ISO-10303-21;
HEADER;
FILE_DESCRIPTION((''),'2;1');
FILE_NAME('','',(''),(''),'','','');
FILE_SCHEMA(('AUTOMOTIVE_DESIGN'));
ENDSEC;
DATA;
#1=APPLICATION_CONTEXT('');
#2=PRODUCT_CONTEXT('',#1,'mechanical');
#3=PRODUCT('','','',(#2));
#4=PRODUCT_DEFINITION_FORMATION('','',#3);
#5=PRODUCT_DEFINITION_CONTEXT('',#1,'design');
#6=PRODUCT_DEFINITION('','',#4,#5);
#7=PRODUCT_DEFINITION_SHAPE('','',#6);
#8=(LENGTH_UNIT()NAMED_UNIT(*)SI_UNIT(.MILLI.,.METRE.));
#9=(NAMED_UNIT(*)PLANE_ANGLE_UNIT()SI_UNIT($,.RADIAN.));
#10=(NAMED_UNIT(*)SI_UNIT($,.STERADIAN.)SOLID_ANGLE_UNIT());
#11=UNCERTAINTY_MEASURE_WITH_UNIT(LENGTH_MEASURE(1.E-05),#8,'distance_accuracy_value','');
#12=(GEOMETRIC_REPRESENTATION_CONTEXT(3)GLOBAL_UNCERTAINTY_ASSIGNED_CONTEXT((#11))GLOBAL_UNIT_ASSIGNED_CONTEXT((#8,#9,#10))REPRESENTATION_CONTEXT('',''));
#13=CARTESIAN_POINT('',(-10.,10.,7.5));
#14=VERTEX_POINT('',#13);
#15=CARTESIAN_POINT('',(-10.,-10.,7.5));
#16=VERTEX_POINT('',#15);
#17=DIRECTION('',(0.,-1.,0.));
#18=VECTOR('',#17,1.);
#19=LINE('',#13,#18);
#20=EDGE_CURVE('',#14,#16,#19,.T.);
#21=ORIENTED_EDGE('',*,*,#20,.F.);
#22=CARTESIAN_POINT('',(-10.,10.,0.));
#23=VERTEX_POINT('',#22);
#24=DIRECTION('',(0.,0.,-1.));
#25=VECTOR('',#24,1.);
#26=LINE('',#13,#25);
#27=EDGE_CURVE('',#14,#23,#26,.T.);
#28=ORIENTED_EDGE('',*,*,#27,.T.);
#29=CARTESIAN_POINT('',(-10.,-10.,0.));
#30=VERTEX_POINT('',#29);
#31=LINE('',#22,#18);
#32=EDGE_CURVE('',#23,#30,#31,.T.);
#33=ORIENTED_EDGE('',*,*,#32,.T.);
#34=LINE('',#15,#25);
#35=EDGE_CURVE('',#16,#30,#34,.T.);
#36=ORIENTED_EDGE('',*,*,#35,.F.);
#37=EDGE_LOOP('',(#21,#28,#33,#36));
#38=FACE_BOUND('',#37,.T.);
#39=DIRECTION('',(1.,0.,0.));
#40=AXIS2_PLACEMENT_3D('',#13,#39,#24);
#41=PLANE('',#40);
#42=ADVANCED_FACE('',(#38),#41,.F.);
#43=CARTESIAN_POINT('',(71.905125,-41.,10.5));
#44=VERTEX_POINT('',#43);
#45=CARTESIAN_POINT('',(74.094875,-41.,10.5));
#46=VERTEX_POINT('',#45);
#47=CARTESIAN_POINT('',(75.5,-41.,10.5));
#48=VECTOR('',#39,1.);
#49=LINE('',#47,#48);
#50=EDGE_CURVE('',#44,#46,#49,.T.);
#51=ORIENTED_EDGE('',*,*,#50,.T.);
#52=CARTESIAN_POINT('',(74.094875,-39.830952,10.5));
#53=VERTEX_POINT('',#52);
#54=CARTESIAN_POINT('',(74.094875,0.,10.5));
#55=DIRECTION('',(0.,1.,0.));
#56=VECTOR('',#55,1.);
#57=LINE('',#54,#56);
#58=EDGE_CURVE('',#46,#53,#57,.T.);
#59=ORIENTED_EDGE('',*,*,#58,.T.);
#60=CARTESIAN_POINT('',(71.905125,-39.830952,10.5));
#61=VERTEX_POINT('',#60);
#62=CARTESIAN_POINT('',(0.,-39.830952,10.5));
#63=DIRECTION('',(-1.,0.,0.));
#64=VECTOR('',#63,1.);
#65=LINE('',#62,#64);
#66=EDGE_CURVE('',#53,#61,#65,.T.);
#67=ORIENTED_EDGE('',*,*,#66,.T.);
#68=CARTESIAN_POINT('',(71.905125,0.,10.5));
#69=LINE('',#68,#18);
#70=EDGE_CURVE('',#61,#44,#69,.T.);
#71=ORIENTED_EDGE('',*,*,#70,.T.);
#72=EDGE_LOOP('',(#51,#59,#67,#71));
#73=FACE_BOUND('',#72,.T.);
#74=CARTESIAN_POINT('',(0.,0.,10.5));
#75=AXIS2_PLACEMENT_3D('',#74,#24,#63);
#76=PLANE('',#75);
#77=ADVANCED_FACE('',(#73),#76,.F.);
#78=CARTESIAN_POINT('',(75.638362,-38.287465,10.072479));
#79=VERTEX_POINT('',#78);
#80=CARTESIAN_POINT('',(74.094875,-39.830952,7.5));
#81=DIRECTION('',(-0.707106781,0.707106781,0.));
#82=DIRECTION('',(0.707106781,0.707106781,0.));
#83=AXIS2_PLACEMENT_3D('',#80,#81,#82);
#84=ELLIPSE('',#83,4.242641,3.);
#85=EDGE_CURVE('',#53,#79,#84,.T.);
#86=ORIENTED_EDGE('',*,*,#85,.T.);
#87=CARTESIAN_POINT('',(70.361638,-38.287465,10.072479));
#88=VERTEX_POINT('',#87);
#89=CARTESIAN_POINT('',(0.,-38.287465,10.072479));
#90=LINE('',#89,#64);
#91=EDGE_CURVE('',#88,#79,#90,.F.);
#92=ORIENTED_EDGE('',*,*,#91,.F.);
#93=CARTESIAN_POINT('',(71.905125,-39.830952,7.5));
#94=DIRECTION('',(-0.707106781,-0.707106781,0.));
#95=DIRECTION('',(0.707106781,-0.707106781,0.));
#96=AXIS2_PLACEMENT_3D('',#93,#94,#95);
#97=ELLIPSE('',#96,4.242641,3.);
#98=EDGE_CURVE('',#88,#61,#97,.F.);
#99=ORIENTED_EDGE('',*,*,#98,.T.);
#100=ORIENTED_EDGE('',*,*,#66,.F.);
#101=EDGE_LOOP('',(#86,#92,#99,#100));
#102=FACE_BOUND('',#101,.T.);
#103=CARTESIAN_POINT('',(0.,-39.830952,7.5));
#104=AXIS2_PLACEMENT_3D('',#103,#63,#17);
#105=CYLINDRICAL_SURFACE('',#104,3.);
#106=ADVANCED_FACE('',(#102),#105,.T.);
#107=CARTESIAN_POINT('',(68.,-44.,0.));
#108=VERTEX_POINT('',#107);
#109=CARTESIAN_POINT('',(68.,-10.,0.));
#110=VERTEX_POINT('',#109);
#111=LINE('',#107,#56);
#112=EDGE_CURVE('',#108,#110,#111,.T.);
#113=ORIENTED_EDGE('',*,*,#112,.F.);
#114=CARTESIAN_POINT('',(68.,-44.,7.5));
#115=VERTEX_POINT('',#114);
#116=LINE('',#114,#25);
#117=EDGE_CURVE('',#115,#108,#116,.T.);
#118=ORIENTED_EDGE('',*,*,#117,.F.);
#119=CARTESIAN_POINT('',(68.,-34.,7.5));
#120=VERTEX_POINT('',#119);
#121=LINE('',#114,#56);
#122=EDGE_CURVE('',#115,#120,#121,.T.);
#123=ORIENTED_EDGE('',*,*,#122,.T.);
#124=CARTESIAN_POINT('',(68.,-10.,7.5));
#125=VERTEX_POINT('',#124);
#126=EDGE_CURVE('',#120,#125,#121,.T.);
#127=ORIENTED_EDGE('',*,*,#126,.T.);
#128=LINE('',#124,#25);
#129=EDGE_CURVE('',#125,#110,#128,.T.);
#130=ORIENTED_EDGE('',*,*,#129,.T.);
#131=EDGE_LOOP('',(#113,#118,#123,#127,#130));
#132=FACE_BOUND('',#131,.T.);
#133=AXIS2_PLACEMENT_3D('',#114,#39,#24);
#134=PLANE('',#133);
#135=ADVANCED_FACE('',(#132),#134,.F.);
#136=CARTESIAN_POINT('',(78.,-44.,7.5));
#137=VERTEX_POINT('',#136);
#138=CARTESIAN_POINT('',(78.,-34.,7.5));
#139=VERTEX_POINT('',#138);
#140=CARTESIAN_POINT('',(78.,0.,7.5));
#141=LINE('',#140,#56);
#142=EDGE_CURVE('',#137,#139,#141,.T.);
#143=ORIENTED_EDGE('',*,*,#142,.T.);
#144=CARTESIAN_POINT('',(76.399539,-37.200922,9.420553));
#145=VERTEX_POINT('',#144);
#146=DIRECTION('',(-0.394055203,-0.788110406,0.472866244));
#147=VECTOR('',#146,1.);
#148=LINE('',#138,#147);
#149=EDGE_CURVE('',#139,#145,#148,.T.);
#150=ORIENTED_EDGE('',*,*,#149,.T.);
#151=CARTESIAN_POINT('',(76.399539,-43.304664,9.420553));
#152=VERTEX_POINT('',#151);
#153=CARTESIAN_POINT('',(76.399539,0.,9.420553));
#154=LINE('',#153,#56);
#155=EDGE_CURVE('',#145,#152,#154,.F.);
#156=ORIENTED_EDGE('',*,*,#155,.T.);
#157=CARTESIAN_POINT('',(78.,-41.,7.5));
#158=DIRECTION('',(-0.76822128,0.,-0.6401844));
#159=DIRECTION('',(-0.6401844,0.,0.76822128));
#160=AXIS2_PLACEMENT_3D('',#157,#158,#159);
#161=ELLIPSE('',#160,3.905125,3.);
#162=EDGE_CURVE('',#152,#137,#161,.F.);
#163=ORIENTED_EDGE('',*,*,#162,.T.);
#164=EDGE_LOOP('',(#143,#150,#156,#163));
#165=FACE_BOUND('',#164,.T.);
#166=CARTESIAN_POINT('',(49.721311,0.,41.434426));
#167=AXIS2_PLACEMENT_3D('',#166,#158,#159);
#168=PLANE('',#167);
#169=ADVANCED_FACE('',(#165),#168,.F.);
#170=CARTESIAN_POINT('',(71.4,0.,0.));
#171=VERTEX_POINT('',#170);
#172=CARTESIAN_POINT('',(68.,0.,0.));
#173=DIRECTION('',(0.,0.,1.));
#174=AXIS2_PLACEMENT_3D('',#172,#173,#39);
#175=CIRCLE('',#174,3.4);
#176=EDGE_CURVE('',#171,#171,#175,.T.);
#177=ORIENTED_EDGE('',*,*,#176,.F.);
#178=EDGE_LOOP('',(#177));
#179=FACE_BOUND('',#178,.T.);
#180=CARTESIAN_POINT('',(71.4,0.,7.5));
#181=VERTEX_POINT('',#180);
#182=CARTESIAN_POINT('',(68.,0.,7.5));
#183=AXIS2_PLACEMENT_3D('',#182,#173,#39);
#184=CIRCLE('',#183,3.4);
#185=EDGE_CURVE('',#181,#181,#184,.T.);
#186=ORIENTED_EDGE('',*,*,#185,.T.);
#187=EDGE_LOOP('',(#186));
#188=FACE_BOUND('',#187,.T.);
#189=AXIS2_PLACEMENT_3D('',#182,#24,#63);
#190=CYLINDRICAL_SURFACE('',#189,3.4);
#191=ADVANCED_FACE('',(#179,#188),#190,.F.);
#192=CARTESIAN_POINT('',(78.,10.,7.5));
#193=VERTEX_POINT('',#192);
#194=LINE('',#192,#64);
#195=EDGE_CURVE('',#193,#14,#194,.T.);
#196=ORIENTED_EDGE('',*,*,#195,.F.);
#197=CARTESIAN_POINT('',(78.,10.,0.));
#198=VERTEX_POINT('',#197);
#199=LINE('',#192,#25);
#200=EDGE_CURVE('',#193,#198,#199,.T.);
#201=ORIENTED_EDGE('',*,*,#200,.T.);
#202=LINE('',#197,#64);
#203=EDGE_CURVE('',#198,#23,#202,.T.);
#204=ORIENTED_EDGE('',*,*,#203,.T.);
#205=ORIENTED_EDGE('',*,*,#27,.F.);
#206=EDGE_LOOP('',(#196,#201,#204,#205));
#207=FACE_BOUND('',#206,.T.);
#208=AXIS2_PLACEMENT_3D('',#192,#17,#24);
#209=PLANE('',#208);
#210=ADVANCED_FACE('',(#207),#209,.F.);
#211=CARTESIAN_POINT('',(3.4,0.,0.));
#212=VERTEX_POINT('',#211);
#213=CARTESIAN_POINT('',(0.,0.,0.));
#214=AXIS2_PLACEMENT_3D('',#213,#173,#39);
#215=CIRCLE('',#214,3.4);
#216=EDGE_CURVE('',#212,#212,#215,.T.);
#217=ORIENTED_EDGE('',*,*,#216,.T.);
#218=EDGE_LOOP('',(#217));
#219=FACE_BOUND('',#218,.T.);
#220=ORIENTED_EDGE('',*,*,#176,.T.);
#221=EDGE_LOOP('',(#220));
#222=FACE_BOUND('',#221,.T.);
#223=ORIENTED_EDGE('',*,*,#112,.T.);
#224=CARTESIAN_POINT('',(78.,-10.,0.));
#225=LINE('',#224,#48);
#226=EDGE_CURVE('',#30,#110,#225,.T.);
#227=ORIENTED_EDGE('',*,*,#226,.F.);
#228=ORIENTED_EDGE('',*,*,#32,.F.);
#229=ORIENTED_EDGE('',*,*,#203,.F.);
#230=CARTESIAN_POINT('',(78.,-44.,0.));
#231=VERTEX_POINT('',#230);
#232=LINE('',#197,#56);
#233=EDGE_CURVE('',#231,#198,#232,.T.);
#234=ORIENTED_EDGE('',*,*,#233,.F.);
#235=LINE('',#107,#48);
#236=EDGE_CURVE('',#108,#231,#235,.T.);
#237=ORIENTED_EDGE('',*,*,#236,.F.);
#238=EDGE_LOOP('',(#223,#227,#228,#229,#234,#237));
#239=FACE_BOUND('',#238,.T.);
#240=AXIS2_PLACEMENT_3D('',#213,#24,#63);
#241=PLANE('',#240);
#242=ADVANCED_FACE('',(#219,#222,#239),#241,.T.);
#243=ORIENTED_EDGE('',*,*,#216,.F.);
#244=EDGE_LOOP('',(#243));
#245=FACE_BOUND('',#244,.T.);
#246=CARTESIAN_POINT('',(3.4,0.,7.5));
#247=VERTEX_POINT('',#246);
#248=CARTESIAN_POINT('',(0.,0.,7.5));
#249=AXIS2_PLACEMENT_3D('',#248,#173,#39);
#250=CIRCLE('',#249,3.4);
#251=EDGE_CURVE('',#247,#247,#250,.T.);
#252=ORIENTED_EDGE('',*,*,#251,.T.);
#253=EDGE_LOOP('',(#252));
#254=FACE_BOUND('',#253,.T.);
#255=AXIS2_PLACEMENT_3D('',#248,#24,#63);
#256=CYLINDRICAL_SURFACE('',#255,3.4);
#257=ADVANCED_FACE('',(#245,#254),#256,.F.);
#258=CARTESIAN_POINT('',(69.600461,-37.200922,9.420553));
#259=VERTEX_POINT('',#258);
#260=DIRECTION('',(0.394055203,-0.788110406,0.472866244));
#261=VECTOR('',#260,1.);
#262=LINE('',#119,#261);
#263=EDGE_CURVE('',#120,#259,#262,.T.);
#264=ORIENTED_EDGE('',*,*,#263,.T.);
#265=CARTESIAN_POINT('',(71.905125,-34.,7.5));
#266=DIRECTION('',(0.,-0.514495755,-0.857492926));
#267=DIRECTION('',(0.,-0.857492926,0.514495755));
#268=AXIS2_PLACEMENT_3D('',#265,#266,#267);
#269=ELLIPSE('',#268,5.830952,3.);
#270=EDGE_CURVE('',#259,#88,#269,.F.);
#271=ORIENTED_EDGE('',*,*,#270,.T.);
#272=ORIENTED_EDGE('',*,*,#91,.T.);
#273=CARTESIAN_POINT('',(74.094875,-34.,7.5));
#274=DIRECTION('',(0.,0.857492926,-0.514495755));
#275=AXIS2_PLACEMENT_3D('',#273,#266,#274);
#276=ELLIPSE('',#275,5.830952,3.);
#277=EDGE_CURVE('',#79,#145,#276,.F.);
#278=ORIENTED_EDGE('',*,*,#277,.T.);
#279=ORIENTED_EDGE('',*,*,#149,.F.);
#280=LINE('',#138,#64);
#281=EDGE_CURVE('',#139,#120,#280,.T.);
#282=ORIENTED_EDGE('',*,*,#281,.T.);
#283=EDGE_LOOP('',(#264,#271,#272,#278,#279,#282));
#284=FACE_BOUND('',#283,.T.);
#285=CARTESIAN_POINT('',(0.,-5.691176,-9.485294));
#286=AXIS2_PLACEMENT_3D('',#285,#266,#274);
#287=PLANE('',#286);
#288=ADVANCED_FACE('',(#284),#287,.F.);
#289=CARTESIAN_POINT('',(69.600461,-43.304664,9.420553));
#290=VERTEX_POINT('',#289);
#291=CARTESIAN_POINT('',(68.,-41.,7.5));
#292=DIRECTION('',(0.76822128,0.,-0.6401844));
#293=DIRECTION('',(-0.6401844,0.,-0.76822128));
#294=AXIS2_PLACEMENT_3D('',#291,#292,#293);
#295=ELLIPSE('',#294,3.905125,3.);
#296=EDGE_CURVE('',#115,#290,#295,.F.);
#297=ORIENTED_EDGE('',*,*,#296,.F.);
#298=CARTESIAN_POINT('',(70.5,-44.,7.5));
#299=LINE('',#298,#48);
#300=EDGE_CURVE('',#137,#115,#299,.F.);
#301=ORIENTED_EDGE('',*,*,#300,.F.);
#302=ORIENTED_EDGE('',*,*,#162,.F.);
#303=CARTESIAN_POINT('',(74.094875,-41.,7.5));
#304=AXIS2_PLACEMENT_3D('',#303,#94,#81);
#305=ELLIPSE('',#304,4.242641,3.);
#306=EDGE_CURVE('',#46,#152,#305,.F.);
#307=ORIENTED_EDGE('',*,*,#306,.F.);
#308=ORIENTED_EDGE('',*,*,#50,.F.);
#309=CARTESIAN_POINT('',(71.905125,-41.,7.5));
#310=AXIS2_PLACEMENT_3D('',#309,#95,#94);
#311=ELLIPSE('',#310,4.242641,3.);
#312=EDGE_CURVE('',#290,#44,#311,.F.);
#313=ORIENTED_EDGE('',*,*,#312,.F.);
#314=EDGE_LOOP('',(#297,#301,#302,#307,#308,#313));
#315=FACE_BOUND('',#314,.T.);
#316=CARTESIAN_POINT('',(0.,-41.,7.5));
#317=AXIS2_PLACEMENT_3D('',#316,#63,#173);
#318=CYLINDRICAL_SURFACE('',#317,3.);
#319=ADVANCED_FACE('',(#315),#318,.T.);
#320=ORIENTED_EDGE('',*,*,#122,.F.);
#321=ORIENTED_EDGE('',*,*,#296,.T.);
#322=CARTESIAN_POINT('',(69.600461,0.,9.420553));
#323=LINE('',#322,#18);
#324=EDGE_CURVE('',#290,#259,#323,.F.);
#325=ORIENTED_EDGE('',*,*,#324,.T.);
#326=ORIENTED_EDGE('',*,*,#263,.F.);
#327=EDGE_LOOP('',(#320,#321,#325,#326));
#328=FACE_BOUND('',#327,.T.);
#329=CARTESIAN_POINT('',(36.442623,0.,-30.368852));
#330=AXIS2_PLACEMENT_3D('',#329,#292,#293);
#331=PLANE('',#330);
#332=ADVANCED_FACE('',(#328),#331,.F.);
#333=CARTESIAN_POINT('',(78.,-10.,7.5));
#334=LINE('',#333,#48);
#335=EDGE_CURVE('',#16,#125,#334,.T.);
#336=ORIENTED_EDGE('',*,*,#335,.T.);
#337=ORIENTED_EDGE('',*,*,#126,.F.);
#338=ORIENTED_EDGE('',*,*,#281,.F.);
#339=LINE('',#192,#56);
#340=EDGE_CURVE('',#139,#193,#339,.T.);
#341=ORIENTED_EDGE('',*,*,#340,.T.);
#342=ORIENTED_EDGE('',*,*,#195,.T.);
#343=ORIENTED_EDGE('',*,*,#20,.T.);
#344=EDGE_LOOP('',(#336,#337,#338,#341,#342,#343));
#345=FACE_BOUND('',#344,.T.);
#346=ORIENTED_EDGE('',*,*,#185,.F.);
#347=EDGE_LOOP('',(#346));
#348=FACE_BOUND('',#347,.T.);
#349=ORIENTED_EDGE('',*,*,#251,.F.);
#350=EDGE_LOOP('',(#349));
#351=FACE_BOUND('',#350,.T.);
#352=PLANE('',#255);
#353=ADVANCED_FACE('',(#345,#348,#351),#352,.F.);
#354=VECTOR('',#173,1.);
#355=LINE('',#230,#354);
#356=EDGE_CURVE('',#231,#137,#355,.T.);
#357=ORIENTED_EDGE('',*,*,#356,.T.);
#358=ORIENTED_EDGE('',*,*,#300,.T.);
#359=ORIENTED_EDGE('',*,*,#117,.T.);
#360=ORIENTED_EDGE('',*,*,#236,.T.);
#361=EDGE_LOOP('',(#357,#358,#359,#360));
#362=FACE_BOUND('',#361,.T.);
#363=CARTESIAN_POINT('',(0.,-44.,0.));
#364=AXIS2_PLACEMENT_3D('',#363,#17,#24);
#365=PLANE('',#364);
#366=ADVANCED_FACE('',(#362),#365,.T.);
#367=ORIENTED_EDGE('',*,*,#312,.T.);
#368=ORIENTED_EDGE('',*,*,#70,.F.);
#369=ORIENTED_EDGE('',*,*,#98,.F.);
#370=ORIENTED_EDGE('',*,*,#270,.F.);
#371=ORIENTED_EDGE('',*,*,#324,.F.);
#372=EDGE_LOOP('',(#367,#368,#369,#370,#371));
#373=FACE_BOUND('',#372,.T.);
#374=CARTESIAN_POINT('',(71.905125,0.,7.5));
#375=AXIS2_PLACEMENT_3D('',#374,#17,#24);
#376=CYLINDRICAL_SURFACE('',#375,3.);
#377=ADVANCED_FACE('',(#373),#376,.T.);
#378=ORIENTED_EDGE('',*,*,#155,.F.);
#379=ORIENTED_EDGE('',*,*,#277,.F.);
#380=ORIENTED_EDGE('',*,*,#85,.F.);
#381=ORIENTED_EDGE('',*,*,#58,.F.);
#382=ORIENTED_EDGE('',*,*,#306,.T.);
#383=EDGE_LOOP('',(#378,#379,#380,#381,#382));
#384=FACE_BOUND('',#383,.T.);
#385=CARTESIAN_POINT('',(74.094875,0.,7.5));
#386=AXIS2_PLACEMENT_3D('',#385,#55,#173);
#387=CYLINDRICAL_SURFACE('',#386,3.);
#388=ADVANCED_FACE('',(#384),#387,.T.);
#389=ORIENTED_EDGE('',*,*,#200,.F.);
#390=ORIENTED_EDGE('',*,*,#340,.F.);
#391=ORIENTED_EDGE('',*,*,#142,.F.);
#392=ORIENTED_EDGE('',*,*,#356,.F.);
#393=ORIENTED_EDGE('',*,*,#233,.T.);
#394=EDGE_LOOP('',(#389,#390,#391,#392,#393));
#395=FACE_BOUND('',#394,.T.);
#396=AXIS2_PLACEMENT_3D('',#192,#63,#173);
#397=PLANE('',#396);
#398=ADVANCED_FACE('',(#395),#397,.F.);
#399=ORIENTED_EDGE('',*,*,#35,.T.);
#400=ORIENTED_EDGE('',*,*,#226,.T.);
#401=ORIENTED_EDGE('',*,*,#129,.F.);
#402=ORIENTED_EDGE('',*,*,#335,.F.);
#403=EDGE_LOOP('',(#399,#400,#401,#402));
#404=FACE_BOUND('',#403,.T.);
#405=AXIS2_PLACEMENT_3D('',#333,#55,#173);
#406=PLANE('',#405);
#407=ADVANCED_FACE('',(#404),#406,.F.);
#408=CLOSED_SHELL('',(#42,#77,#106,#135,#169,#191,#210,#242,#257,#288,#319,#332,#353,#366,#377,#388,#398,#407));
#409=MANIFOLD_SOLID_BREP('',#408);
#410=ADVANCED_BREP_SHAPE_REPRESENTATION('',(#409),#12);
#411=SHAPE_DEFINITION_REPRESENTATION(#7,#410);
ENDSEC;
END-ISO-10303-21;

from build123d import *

# Parameters (mm, degrees)
SKETCH1_W           = 88
SKETCH1_H           = 20
SKETCH1_R           = 3.4
BOSS_EXTRUDE1_DEPTH = 7.5
SKETCH2_W           = 10
SKETCH2_H           = 7.5
BOSS_EXTRUDE2_DEPTH = 34
FILLET1_R           = 3


with BuildPart() as part:
    # Sketch1 → Boss-Extrude1 (new body)
    with BuildSketch(Plane.XY):
        with Locations((34, 0)):
            Rectangle(SKETCH1_W, SKETCH1_H)
        Circle(SKETCH1_R, mode=Mode.SUBTRACT)
        with Locations((68, 0)):
            Circle(SKETCH1_R, mode=Mode.SUBTRACT)
    extrude(amount=BOSS_EXTRUDE1_DEPTH)

    # Sketch2 → Boss-Extrude2 (add)
    with BuildSketch(Plane.XZ.offset(10)):
        with Locations((73, 3.75)):
            Rectangle(SKETCH2_W, SKETCH2_H)
    extrude(amount=BOSS_EXTRUDE2_DEPTH)

    # Sketch4 → Loft1 section 0
    with BuildSketch(Plane.XY.offset(7.5)):
        with BuildLine():
            Line((78, -44), (68, -44))
            Line((68, -44), (68, -34))
            Line((68, -34), (78, -34))
            Line((78, -34), (78, -44))
        make_face()
    # Sketch3 → Loft1 section 1
    with BuildSketch(Plane.XY.offset(10.5)):
        with BuildLine():
            Line((75.5, -39), (70.5, -39))
            Line((70.5, -39), (70.5, -44))
            Line((70.5, -44), (75.5, -44))
            Line((75.5, -44), (75.5, -39))
        make_face()
    loft()

    # Fillet1
    fillet1_edges = [part.edges().sort_by_distance(p)[0] for p in [
        (73, -39, 10.5),
        (75.5, -41.5, 10.5),
        (73, -44, 10.5),
        (70.5, -41.5, 10.5),
    ]]
    fillet(fillet1_edges, radius=FILLET1_R - 0.0001)  # a hair under: the kernel refuses the full size


solid = part.part
